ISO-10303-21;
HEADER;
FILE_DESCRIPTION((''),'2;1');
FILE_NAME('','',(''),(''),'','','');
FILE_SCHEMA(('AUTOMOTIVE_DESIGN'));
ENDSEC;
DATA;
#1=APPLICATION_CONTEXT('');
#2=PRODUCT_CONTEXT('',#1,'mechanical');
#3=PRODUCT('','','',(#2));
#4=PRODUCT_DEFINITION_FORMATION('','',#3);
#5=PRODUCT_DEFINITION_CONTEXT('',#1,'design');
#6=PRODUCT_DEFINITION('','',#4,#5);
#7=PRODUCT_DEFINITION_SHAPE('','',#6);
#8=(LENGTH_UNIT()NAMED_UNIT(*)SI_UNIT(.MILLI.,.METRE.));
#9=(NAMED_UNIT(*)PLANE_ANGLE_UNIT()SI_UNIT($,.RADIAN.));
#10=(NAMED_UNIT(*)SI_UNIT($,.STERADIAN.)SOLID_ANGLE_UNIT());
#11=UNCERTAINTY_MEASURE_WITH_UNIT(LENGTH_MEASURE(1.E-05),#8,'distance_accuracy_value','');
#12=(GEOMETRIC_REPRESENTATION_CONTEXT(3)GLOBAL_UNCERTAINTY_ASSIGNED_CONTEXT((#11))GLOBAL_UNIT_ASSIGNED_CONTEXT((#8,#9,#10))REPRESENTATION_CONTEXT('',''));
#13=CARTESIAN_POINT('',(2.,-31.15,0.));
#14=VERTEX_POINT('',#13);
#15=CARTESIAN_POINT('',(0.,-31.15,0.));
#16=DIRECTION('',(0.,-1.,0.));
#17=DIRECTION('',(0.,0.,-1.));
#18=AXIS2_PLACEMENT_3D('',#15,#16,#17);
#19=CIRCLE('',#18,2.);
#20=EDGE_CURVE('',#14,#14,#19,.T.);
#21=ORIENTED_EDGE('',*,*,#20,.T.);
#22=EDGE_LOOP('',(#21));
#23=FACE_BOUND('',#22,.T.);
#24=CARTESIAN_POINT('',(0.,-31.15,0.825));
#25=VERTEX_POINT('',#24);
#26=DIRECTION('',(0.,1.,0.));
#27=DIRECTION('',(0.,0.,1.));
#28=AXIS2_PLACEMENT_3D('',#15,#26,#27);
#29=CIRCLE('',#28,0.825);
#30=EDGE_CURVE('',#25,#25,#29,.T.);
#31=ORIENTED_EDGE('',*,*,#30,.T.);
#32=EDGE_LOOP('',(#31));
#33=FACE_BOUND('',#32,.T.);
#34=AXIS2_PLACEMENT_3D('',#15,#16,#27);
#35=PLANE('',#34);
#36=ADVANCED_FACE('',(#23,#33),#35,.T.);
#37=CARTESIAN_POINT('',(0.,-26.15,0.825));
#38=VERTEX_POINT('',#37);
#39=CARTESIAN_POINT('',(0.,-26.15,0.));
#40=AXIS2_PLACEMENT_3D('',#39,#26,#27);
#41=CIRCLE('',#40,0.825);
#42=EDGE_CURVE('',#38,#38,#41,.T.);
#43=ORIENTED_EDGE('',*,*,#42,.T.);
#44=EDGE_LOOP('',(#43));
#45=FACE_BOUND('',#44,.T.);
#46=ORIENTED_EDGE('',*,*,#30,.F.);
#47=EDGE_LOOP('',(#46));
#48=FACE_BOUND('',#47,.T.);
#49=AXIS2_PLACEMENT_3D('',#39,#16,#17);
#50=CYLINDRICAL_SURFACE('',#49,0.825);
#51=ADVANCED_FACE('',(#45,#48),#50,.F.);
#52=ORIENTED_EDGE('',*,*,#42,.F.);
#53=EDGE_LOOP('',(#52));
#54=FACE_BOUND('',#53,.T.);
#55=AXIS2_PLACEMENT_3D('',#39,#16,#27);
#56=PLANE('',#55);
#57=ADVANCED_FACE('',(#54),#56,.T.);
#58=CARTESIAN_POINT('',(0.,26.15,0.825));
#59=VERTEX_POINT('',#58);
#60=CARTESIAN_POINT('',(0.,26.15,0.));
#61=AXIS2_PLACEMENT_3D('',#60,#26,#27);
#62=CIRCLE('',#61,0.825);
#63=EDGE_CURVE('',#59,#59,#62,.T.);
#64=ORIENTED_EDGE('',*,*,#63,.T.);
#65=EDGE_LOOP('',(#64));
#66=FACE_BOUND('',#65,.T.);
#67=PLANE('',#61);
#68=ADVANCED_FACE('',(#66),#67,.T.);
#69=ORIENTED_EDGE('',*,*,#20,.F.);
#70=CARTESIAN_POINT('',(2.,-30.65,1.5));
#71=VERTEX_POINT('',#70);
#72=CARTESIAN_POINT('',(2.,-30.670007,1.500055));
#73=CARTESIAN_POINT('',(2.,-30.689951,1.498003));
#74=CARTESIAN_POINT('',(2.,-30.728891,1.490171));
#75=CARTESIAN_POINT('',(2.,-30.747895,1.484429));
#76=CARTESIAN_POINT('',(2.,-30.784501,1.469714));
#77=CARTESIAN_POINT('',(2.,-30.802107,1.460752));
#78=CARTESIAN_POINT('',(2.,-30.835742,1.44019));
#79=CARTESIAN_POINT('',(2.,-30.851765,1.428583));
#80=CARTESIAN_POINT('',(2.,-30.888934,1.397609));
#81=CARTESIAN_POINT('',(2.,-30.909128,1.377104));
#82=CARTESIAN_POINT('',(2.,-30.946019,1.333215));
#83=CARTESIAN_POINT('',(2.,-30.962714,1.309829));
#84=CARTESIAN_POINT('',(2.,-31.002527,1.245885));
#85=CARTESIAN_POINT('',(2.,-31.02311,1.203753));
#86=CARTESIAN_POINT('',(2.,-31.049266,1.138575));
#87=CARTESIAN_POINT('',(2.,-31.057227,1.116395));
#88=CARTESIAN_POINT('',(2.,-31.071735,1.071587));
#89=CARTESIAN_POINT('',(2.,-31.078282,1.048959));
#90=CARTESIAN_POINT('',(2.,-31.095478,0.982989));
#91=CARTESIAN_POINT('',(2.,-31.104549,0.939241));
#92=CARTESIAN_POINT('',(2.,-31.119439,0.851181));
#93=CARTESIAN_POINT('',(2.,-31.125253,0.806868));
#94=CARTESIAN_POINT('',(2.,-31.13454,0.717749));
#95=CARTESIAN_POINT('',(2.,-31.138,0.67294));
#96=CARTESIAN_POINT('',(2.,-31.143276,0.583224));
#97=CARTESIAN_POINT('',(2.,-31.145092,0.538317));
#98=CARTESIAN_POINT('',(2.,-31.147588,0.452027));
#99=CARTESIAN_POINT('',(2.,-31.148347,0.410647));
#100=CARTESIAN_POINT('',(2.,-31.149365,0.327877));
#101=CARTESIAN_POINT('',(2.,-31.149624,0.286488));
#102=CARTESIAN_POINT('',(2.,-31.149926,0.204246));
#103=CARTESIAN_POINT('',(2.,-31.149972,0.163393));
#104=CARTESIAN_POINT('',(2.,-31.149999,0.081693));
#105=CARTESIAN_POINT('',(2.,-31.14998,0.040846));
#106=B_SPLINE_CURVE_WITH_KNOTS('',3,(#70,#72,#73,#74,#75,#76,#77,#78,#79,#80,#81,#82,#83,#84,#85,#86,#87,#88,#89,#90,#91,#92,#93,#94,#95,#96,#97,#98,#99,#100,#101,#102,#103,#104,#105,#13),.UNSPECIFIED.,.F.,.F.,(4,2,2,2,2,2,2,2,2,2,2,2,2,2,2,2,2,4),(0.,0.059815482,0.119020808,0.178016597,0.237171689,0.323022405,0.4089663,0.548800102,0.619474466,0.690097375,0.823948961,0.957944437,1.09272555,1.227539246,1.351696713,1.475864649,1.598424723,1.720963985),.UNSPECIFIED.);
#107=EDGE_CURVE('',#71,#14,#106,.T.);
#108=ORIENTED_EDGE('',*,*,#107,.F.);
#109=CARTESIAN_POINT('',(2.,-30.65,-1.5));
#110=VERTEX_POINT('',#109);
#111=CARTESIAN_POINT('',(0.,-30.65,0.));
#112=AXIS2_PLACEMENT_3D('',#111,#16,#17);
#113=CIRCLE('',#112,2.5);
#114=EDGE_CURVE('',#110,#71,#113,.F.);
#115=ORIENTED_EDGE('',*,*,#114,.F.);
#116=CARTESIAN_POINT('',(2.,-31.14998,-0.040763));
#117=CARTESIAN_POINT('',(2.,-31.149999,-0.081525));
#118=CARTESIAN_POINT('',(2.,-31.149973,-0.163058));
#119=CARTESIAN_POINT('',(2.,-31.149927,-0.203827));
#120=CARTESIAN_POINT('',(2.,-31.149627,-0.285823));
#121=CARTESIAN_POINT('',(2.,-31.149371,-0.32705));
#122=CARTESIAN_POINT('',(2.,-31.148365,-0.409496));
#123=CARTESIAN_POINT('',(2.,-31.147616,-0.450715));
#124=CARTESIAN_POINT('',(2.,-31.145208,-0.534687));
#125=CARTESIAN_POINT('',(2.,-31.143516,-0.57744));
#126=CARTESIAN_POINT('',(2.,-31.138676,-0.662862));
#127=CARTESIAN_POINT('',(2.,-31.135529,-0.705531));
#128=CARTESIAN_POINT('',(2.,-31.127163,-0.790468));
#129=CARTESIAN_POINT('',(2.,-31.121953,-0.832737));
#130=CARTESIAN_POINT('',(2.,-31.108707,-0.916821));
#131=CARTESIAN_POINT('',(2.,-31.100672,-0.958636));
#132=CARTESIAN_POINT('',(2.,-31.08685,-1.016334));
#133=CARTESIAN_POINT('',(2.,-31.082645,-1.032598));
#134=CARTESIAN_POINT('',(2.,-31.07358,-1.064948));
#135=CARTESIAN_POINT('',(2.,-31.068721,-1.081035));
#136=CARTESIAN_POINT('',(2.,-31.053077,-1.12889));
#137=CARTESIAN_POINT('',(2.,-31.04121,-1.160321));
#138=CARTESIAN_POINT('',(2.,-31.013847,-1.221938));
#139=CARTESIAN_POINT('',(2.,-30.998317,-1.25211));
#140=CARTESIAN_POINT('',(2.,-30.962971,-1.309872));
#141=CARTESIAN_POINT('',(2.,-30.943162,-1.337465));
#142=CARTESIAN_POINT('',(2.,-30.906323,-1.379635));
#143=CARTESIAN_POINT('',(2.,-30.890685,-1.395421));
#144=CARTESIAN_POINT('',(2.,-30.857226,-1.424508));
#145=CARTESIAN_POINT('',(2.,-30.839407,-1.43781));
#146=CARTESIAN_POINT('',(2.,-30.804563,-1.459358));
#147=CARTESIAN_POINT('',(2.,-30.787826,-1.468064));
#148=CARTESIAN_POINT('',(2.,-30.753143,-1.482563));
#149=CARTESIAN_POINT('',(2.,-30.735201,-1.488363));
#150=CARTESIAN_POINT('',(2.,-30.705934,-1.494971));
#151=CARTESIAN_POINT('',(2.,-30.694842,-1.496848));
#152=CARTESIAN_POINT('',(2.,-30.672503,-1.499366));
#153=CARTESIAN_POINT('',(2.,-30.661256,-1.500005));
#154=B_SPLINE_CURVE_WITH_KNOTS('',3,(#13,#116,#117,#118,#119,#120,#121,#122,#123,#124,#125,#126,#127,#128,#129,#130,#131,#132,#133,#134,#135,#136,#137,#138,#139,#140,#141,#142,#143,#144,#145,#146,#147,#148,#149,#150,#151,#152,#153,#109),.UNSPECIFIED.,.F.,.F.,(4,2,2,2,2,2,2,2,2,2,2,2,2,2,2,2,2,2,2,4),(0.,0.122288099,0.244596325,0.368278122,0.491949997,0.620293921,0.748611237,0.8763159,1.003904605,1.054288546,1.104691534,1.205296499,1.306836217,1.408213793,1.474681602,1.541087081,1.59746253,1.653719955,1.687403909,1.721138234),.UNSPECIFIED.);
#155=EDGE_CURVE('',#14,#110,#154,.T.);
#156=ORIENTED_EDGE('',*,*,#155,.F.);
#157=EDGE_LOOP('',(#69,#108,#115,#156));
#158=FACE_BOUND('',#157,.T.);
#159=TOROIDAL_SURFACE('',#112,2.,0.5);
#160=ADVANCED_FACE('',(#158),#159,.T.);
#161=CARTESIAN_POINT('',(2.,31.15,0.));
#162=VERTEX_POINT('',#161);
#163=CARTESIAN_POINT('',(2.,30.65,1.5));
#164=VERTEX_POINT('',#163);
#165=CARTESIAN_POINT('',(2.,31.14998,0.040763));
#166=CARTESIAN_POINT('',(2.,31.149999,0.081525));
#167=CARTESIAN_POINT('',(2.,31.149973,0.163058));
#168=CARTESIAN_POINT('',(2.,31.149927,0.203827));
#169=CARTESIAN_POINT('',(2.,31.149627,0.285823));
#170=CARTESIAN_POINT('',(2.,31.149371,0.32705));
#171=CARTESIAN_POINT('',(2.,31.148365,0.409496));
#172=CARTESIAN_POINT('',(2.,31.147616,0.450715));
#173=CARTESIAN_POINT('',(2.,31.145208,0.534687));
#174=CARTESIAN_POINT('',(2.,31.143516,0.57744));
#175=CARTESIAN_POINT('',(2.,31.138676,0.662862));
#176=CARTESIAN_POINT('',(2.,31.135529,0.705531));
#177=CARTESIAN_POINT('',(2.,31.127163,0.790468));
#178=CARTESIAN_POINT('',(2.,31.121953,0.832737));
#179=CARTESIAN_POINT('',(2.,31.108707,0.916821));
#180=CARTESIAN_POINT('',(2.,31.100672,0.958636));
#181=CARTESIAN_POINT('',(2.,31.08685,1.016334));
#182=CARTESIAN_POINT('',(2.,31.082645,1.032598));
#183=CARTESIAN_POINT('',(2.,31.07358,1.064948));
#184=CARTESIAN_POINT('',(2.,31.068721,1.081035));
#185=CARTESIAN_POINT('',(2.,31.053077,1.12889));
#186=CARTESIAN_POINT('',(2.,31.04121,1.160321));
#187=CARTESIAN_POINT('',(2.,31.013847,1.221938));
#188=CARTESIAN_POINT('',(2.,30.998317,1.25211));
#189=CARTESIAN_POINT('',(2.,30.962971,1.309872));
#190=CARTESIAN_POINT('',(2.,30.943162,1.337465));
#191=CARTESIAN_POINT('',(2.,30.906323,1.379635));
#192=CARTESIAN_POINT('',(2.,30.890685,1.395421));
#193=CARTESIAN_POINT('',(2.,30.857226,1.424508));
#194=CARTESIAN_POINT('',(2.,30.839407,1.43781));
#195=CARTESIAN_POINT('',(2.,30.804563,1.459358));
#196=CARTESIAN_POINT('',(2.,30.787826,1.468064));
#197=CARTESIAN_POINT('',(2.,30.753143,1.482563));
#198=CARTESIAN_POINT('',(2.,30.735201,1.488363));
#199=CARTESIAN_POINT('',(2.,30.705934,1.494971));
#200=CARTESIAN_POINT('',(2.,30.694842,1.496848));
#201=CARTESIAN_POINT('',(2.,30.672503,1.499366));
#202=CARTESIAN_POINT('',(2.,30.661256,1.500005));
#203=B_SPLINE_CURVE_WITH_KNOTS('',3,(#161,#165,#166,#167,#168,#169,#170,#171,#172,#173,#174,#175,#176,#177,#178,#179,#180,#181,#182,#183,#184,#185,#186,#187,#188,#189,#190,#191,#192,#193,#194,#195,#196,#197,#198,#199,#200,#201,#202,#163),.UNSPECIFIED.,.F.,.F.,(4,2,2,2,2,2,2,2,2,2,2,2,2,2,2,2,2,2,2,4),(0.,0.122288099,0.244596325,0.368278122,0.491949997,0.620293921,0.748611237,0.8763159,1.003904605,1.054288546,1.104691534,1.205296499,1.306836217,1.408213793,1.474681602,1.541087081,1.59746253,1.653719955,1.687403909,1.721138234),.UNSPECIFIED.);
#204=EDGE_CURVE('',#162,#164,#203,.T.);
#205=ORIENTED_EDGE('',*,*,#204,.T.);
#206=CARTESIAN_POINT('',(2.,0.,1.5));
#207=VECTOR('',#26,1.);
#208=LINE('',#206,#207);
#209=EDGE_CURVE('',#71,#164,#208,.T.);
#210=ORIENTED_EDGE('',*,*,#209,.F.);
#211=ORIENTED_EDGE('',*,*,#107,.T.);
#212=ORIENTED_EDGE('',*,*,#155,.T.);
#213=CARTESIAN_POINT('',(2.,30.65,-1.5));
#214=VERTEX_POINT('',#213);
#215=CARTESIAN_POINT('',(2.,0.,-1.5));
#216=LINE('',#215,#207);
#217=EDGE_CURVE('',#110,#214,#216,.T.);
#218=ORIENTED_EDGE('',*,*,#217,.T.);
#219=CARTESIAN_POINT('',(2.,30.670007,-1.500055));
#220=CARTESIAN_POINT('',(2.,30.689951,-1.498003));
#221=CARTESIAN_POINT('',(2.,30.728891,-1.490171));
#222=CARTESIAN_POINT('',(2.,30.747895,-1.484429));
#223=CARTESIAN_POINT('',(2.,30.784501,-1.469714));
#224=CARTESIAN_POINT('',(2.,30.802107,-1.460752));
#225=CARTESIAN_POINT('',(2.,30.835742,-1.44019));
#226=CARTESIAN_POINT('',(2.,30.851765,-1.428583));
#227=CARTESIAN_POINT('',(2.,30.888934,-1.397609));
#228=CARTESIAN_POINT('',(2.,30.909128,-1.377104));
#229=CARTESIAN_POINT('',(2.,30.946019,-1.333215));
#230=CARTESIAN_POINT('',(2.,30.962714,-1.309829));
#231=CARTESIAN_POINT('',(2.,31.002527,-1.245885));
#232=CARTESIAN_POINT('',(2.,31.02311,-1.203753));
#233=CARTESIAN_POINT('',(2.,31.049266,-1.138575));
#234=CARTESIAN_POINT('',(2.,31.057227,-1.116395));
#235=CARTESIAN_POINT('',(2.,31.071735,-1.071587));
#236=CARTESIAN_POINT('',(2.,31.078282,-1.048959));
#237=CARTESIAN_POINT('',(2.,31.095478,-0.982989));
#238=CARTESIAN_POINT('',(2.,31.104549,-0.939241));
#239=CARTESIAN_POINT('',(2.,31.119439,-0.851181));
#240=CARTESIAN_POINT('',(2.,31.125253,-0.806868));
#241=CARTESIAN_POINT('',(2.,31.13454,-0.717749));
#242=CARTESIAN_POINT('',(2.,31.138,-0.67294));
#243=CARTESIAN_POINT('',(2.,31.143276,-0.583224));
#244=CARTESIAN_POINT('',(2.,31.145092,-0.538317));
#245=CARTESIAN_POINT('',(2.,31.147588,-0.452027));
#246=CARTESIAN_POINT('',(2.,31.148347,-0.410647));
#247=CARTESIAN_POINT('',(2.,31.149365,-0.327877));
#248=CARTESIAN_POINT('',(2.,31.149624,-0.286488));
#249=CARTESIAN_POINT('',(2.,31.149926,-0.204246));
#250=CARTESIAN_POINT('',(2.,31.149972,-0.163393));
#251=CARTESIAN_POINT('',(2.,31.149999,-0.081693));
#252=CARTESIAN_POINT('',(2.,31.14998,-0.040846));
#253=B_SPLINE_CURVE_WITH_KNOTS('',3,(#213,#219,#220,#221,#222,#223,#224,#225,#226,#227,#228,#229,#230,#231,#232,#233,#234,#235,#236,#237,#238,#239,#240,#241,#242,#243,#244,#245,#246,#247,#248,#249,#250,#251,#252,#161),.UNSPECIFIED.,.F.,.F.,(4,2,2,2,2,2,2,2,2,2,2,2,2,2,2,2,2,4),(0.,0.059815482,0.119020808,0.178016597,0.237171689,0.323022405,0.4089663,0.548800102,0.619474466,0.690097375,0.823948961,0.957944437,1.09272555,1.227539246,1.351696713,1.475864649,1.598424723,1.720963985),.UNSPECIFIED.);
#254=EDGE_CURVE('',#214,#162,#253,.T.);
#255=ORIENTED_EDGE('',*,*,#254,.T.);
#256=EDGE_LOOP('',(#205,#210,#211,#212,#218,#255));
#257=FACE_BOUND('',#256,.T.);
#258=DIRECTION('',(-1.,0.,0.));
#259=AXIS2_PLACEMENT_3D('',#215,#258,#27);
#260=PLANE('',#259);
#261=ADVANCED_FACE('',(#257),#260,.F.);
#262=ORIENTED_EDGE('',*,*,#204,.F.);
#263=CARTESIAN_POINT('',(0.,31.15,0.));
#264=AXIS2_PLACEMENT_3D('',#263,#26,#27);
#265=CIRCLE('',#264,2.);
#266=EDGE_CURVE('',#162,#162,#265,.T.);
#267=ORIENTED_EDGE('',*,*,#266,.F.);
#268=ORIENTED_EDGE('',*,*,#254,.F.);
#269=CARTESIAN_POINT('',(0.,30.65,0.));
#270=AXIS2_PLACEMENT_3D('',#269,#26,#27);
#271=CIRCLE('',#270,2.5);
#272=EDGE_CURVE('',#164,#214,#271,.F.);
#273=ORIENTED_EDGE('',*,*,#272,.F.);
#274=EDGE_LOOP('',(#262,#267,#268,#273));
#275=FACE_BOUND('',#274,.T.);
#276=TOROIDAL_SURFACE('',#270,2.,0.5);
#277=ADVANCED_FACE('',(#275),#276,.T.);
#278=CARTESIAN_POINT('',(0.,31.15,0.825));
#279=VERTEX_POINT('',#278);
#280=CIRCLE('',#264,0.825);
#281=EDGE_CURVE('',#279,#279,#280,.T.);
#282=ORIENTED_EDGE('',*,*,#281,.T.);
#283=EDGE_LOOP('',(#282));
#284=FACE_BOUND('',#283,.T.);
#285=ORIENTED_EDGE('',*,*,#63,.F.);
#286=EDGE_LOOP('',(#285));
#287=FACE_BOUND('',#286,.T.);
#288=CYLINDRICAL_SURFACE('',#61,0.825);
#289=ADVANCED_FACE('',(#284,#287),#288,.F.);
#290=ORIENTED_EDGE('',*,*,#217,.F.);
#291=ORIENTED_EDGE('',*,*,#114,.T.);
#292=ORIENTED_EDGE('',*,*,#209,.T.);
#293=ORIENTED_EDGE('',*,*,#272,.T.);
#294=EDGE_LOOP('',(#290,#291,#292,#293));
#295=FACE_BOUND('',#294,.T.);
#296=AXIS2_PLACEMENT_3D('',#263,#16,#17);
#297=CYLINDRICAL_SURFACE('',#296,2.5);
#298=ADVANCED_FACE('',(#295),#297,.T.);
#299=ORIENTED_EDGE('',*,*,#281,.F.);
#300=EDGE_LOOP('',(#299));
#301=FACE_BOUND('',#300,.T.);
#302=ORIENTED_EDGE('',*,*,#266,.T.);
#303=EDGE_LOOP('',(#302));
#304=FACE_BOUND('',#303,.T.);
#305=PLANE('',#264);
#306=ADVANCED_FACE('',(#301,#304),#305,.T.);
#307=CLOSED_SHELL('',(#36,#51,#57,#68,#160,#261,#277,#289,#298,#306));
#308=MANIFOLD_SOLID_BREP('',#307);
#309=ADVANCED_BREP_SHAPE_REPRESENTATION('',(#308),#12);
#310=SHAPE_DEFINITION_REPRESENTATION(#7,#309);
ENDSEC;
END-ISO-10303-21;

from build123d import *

# Parameters (mm, degrees)
SKETCH1_R            = 2.5
BOSS_EXTRUDE1_DEPTH  = 31.15
SKETCH2_R            = 0.825
CUT_EXTRUDE1_DEPTH   = 5
CUT_EXTRUDE2_DEPTH   = 32.35
FILLET1_R            = 0.5
FILLET1_OF_MIRROR1_R = 0.5


with BuildPart() as part:
    # Sketch1 → Boss-Extrude1 (new body)
    with BuildSketch(Plane(origin=(0, 0, 0), x_dir=(1, 0, 0), z_dir=(0, 1, 0))):
        with Locations(Location((0, 0, 0), (0, 0, 270))):
            Circle(SKETCH1_R)
    boss_extrude1 = extrude(amount=BOSS_EXTRUDE1_DEPTH)

    # Sketch2 → Cut-Extrude1 (cut)
    with BuildSketch(Plane(origin=(0, 31.15, 0), x_dir=(1, 0, 0), z_dir=(0, 1, 0))):
        with Locations(Location((0, 0, 0), (0, 0, 270))):
            Circle(SKETCH2_R)
    cut_extrude1 = extrude(amount=-CUT_EXTRUDE1_DEPTH, mode=Mode.SUBTRACT)

    # Sketch3 → Cut-Extrude2 (cut, through all)
    with BuildSketch(Plane(origin=(0, 31.15, 0), x_dir=(1, 0, 0), z_dir=(0, 1, 0))):
        with BuildLine():
            Line((2, 1.5), (2, -1.5))
            ThreePointArc((2, -1.5), (2.5, 0), (2, 1.5))
        make_face()
    cut_extrude2 = extrude(amount=-CUT_EXTRUDE2_DEPTH, mode=Mode.SUBTRACT)

    # Fillet1
    fillet1_edges = [part.edges().sort_by_distance(p)[0] for p in [
        (-2.5, 31.15, 0),
    ]]
    fillet(fillet1_edges, radius=FILLET1_R - 0.0001)  # a hair under: the kernel refuses the full size

    # Mirror1: Boss-Extrude1, Cut-Extrude1, Cut-Extrude2 across plane
    add(boss_extrude1.mirror(Plane.ZX))
    add(cut_extrude1.mirror(Plane.ZX), mode=Mode.SUBTRACT)
    add(cut_extrude2.mirror(Plane.ZX), mode=Mode.SUBTRACT)

    # Fillet1 of Mirror1
    fillet1_of_mirror1_edges = [part.edges().sort_by_distance(p)[0] for p in [
        (-2.5, -31.15, 0),
    ]]
    fillet(fillet1_of_mirror1_edges, radius=FILLET1_OF_MIRROR1_R - 0.0001)  # a hair under: the kernel refuses the full size


solid = part.part
